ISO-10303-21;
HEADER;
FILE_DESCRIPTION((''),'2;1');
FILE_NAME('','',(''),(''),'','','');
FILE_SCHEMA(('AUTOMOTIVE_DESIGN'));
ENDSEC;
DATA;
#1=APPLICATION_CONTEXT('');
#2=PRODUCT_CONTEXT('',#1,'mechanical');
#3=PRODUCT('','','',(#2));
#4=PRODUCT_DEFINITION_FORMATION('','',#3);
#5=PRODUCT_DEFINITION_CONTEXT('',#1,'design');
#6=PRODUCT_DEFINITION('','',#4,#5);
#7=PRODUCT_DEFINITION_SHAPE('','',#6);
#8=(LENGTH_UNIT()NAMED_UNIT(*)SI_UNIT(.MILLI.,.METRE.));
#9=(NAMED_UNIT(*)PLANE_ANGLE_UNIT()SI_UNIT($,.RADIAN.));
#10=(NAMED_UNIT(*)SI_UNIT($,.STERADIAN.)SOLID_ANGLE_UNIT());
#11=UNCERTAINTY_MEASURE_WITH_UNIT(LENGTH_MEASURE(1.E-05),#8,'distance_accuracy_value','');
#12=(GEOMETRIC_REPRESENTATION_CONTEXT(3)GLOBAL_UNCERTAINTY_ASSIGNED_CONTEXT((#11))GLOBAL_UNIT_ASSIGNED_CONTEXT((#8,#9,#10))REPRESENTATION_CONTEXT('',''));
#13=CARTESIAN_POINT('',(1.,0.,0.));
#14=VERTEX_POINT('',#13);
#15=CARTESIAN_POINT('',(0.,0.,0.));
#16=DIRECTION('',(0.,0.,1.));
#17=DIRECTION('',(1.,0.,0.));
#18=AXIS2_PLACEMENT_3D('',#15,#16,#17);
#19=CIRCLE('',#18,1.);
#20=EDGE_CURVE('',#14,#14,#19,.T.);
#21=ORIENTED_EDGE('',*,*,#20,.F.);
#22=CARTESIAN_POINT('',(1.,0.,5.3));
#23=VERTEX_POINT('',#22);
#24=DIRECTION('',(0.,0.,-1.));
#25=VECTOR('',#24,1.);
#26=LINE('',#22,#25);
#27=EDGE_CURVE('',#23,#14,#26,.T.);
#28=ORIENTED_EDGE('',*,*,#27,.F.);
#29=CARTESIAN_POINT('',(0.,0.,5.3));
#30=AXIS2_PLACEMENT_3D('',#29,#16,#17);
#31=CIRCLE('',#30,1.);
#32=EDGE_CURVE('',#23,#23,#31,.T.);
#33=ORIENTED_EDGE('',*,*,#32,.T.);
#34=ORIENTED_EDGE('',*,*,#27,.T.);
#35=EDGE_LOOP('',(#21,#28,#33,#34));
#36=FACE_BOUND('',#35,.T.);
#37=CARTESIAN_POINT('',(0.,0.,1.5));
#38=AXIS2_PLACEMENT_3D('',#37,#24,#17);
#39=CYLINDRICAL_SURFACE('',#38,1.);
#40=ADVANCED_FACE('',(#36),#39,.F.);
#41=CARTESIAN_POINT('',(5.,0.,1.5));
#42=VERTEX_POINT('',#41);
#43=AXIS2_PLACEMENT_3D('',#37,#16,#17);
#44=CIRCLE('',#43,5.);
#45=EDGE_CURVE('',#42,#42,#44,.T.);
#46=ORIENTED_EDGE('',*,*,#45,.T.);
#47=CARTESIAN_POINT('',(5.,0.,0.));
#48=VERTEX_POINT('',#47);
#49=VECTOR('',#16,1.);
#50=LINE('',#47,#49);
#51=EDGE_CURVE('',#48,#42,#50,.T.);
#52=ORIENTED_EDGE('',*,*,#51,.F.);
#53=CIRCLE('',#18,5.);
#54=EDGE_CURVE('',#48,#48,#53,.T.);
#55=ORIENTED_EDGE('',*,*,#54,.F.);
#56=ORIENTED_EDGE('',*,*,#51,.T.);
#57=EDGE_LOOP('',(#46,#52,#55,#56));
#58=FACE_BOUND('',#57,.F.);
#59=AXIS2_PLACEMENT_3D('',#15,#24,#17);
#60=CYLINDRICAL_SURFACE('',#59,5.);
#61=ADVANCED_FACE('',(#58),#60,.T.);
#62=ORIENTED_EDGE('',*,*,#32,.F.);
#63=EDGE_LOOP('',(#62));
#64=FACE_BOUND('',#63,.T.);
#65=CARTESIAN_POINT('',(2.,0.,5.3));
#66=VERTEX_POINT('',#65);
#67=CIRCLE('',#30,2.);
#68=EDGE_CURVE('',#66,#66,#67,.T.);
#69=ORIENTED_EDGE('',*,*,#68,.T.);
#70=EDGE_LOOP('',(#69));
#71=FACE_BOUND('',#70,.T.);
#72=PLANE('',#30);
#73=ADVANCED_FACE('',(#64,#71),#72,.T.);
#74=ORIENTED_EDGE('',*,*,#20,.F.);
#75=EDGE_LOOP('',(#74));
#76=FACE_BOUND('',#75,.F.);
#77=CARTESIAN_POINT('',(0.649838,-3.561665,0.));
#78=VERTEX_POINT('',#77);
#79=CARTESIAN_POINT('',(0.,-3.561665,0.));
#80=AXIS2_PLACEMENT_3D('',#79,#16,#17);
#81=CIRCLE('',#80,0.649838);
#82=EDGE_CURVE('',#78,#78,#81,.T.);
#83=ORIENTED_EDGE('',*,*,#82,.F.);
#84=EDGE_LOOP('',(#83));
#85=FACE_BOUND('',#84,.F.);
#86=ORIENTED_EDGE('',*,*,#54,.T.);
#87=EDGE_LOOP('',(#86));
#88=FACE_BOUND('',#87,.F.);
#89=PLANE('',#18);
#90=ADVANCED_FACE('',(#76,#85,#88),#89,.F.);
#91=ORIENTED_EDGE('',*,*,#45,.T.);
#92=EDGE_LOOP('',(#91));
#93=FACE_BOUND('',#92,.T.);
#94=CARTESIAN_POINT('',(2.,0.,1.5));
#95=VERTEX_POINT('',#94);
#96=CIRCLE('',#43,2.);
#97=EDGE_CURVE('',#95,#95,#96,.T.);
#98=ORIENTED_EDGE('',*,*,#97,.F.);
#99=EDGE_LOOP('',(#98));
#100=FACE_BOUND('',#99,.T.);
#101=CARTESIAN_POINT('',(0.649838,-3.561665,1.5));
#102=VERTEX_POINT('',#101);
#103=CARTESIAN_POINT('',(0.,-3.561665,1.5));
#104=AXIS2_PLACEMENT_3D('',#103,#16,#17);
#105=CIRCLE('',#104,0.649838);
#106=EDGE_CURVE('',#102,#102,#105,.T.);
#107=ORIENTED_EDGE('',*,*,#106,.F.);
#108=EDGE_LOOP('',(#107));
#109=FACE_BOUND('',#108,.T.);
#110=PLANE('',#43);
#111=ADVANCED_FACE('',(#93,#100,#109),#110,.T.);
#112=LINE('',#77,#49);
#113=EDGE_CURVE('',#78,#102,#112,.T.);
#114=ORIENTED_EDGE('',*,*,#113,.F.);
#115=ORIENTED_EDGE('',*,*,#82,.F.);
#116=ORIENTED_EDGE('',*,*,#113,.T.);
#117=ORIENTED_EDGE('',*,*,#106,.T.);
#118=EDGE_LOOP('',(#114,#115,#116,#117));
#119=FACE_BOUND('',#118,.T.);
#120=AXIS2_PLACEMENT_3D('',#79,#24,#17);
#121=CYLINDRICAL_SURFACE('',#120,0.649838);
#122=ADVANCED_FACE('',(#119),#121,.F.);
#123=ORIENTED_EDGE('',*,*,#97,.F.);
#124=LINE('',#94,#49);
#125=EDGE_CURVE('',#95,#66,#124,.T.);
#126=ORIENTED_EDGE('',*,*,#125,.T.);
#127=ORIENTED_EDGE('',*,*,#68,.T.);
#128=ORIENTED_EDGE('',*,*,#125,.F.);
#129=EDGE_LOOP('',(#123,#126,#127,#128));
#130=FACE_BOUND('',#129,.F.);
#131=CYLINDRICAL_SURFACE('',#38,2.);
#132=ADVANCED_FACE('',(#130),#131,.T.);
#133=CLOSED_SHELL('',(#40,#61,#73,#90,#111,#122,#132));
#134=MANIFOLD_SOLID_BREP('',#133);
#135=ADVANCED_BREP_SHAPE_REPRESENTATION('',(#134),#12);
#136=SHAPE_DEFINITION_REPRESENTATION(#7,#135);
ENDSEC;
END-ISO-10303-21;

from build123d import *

# Parameters (mm, degrees)
F0_R     = 5
F0_R_2   = 1
F1_DEPTH = 1.5
F2_R     = 2
F2_R_2   = 1
F3_DEPTH = 3.8
F4_R     = 0.6498381819
F5_DEPTH = 1.5


# Not quite as in the source:
# - a feature names something its author has since deleted; it is built from what else it names


with BuildPart() as f1:
    # F0 (on Top) → F1 (new body)
    with BuildSketch(Plane.XY):
        Circle(F0_R)
        Circle(F0_R_2, mode=Mode.SUBTRACT)
    extrude(amount=F1_DEPTH)

    # F2 (on face) → F3 (join)
    with BuildSketch(Plane.XY.offset(1.5)):
        Circle(F2_R)
        Circle(F2_R_2, mode=Mode.SUBTRACT)
    extrude(amount=F3_DEPTH)

    # F4 (on Top) → F5 (cut, through all)
    with BuildSketch(Plane.XY):
        with Locations((0, -3.5616646055)):
            Circle(F4_R)
    extrude(amount=F5_DEPTH, mode=Mode.SUBTRACT)


solid = f1.part
